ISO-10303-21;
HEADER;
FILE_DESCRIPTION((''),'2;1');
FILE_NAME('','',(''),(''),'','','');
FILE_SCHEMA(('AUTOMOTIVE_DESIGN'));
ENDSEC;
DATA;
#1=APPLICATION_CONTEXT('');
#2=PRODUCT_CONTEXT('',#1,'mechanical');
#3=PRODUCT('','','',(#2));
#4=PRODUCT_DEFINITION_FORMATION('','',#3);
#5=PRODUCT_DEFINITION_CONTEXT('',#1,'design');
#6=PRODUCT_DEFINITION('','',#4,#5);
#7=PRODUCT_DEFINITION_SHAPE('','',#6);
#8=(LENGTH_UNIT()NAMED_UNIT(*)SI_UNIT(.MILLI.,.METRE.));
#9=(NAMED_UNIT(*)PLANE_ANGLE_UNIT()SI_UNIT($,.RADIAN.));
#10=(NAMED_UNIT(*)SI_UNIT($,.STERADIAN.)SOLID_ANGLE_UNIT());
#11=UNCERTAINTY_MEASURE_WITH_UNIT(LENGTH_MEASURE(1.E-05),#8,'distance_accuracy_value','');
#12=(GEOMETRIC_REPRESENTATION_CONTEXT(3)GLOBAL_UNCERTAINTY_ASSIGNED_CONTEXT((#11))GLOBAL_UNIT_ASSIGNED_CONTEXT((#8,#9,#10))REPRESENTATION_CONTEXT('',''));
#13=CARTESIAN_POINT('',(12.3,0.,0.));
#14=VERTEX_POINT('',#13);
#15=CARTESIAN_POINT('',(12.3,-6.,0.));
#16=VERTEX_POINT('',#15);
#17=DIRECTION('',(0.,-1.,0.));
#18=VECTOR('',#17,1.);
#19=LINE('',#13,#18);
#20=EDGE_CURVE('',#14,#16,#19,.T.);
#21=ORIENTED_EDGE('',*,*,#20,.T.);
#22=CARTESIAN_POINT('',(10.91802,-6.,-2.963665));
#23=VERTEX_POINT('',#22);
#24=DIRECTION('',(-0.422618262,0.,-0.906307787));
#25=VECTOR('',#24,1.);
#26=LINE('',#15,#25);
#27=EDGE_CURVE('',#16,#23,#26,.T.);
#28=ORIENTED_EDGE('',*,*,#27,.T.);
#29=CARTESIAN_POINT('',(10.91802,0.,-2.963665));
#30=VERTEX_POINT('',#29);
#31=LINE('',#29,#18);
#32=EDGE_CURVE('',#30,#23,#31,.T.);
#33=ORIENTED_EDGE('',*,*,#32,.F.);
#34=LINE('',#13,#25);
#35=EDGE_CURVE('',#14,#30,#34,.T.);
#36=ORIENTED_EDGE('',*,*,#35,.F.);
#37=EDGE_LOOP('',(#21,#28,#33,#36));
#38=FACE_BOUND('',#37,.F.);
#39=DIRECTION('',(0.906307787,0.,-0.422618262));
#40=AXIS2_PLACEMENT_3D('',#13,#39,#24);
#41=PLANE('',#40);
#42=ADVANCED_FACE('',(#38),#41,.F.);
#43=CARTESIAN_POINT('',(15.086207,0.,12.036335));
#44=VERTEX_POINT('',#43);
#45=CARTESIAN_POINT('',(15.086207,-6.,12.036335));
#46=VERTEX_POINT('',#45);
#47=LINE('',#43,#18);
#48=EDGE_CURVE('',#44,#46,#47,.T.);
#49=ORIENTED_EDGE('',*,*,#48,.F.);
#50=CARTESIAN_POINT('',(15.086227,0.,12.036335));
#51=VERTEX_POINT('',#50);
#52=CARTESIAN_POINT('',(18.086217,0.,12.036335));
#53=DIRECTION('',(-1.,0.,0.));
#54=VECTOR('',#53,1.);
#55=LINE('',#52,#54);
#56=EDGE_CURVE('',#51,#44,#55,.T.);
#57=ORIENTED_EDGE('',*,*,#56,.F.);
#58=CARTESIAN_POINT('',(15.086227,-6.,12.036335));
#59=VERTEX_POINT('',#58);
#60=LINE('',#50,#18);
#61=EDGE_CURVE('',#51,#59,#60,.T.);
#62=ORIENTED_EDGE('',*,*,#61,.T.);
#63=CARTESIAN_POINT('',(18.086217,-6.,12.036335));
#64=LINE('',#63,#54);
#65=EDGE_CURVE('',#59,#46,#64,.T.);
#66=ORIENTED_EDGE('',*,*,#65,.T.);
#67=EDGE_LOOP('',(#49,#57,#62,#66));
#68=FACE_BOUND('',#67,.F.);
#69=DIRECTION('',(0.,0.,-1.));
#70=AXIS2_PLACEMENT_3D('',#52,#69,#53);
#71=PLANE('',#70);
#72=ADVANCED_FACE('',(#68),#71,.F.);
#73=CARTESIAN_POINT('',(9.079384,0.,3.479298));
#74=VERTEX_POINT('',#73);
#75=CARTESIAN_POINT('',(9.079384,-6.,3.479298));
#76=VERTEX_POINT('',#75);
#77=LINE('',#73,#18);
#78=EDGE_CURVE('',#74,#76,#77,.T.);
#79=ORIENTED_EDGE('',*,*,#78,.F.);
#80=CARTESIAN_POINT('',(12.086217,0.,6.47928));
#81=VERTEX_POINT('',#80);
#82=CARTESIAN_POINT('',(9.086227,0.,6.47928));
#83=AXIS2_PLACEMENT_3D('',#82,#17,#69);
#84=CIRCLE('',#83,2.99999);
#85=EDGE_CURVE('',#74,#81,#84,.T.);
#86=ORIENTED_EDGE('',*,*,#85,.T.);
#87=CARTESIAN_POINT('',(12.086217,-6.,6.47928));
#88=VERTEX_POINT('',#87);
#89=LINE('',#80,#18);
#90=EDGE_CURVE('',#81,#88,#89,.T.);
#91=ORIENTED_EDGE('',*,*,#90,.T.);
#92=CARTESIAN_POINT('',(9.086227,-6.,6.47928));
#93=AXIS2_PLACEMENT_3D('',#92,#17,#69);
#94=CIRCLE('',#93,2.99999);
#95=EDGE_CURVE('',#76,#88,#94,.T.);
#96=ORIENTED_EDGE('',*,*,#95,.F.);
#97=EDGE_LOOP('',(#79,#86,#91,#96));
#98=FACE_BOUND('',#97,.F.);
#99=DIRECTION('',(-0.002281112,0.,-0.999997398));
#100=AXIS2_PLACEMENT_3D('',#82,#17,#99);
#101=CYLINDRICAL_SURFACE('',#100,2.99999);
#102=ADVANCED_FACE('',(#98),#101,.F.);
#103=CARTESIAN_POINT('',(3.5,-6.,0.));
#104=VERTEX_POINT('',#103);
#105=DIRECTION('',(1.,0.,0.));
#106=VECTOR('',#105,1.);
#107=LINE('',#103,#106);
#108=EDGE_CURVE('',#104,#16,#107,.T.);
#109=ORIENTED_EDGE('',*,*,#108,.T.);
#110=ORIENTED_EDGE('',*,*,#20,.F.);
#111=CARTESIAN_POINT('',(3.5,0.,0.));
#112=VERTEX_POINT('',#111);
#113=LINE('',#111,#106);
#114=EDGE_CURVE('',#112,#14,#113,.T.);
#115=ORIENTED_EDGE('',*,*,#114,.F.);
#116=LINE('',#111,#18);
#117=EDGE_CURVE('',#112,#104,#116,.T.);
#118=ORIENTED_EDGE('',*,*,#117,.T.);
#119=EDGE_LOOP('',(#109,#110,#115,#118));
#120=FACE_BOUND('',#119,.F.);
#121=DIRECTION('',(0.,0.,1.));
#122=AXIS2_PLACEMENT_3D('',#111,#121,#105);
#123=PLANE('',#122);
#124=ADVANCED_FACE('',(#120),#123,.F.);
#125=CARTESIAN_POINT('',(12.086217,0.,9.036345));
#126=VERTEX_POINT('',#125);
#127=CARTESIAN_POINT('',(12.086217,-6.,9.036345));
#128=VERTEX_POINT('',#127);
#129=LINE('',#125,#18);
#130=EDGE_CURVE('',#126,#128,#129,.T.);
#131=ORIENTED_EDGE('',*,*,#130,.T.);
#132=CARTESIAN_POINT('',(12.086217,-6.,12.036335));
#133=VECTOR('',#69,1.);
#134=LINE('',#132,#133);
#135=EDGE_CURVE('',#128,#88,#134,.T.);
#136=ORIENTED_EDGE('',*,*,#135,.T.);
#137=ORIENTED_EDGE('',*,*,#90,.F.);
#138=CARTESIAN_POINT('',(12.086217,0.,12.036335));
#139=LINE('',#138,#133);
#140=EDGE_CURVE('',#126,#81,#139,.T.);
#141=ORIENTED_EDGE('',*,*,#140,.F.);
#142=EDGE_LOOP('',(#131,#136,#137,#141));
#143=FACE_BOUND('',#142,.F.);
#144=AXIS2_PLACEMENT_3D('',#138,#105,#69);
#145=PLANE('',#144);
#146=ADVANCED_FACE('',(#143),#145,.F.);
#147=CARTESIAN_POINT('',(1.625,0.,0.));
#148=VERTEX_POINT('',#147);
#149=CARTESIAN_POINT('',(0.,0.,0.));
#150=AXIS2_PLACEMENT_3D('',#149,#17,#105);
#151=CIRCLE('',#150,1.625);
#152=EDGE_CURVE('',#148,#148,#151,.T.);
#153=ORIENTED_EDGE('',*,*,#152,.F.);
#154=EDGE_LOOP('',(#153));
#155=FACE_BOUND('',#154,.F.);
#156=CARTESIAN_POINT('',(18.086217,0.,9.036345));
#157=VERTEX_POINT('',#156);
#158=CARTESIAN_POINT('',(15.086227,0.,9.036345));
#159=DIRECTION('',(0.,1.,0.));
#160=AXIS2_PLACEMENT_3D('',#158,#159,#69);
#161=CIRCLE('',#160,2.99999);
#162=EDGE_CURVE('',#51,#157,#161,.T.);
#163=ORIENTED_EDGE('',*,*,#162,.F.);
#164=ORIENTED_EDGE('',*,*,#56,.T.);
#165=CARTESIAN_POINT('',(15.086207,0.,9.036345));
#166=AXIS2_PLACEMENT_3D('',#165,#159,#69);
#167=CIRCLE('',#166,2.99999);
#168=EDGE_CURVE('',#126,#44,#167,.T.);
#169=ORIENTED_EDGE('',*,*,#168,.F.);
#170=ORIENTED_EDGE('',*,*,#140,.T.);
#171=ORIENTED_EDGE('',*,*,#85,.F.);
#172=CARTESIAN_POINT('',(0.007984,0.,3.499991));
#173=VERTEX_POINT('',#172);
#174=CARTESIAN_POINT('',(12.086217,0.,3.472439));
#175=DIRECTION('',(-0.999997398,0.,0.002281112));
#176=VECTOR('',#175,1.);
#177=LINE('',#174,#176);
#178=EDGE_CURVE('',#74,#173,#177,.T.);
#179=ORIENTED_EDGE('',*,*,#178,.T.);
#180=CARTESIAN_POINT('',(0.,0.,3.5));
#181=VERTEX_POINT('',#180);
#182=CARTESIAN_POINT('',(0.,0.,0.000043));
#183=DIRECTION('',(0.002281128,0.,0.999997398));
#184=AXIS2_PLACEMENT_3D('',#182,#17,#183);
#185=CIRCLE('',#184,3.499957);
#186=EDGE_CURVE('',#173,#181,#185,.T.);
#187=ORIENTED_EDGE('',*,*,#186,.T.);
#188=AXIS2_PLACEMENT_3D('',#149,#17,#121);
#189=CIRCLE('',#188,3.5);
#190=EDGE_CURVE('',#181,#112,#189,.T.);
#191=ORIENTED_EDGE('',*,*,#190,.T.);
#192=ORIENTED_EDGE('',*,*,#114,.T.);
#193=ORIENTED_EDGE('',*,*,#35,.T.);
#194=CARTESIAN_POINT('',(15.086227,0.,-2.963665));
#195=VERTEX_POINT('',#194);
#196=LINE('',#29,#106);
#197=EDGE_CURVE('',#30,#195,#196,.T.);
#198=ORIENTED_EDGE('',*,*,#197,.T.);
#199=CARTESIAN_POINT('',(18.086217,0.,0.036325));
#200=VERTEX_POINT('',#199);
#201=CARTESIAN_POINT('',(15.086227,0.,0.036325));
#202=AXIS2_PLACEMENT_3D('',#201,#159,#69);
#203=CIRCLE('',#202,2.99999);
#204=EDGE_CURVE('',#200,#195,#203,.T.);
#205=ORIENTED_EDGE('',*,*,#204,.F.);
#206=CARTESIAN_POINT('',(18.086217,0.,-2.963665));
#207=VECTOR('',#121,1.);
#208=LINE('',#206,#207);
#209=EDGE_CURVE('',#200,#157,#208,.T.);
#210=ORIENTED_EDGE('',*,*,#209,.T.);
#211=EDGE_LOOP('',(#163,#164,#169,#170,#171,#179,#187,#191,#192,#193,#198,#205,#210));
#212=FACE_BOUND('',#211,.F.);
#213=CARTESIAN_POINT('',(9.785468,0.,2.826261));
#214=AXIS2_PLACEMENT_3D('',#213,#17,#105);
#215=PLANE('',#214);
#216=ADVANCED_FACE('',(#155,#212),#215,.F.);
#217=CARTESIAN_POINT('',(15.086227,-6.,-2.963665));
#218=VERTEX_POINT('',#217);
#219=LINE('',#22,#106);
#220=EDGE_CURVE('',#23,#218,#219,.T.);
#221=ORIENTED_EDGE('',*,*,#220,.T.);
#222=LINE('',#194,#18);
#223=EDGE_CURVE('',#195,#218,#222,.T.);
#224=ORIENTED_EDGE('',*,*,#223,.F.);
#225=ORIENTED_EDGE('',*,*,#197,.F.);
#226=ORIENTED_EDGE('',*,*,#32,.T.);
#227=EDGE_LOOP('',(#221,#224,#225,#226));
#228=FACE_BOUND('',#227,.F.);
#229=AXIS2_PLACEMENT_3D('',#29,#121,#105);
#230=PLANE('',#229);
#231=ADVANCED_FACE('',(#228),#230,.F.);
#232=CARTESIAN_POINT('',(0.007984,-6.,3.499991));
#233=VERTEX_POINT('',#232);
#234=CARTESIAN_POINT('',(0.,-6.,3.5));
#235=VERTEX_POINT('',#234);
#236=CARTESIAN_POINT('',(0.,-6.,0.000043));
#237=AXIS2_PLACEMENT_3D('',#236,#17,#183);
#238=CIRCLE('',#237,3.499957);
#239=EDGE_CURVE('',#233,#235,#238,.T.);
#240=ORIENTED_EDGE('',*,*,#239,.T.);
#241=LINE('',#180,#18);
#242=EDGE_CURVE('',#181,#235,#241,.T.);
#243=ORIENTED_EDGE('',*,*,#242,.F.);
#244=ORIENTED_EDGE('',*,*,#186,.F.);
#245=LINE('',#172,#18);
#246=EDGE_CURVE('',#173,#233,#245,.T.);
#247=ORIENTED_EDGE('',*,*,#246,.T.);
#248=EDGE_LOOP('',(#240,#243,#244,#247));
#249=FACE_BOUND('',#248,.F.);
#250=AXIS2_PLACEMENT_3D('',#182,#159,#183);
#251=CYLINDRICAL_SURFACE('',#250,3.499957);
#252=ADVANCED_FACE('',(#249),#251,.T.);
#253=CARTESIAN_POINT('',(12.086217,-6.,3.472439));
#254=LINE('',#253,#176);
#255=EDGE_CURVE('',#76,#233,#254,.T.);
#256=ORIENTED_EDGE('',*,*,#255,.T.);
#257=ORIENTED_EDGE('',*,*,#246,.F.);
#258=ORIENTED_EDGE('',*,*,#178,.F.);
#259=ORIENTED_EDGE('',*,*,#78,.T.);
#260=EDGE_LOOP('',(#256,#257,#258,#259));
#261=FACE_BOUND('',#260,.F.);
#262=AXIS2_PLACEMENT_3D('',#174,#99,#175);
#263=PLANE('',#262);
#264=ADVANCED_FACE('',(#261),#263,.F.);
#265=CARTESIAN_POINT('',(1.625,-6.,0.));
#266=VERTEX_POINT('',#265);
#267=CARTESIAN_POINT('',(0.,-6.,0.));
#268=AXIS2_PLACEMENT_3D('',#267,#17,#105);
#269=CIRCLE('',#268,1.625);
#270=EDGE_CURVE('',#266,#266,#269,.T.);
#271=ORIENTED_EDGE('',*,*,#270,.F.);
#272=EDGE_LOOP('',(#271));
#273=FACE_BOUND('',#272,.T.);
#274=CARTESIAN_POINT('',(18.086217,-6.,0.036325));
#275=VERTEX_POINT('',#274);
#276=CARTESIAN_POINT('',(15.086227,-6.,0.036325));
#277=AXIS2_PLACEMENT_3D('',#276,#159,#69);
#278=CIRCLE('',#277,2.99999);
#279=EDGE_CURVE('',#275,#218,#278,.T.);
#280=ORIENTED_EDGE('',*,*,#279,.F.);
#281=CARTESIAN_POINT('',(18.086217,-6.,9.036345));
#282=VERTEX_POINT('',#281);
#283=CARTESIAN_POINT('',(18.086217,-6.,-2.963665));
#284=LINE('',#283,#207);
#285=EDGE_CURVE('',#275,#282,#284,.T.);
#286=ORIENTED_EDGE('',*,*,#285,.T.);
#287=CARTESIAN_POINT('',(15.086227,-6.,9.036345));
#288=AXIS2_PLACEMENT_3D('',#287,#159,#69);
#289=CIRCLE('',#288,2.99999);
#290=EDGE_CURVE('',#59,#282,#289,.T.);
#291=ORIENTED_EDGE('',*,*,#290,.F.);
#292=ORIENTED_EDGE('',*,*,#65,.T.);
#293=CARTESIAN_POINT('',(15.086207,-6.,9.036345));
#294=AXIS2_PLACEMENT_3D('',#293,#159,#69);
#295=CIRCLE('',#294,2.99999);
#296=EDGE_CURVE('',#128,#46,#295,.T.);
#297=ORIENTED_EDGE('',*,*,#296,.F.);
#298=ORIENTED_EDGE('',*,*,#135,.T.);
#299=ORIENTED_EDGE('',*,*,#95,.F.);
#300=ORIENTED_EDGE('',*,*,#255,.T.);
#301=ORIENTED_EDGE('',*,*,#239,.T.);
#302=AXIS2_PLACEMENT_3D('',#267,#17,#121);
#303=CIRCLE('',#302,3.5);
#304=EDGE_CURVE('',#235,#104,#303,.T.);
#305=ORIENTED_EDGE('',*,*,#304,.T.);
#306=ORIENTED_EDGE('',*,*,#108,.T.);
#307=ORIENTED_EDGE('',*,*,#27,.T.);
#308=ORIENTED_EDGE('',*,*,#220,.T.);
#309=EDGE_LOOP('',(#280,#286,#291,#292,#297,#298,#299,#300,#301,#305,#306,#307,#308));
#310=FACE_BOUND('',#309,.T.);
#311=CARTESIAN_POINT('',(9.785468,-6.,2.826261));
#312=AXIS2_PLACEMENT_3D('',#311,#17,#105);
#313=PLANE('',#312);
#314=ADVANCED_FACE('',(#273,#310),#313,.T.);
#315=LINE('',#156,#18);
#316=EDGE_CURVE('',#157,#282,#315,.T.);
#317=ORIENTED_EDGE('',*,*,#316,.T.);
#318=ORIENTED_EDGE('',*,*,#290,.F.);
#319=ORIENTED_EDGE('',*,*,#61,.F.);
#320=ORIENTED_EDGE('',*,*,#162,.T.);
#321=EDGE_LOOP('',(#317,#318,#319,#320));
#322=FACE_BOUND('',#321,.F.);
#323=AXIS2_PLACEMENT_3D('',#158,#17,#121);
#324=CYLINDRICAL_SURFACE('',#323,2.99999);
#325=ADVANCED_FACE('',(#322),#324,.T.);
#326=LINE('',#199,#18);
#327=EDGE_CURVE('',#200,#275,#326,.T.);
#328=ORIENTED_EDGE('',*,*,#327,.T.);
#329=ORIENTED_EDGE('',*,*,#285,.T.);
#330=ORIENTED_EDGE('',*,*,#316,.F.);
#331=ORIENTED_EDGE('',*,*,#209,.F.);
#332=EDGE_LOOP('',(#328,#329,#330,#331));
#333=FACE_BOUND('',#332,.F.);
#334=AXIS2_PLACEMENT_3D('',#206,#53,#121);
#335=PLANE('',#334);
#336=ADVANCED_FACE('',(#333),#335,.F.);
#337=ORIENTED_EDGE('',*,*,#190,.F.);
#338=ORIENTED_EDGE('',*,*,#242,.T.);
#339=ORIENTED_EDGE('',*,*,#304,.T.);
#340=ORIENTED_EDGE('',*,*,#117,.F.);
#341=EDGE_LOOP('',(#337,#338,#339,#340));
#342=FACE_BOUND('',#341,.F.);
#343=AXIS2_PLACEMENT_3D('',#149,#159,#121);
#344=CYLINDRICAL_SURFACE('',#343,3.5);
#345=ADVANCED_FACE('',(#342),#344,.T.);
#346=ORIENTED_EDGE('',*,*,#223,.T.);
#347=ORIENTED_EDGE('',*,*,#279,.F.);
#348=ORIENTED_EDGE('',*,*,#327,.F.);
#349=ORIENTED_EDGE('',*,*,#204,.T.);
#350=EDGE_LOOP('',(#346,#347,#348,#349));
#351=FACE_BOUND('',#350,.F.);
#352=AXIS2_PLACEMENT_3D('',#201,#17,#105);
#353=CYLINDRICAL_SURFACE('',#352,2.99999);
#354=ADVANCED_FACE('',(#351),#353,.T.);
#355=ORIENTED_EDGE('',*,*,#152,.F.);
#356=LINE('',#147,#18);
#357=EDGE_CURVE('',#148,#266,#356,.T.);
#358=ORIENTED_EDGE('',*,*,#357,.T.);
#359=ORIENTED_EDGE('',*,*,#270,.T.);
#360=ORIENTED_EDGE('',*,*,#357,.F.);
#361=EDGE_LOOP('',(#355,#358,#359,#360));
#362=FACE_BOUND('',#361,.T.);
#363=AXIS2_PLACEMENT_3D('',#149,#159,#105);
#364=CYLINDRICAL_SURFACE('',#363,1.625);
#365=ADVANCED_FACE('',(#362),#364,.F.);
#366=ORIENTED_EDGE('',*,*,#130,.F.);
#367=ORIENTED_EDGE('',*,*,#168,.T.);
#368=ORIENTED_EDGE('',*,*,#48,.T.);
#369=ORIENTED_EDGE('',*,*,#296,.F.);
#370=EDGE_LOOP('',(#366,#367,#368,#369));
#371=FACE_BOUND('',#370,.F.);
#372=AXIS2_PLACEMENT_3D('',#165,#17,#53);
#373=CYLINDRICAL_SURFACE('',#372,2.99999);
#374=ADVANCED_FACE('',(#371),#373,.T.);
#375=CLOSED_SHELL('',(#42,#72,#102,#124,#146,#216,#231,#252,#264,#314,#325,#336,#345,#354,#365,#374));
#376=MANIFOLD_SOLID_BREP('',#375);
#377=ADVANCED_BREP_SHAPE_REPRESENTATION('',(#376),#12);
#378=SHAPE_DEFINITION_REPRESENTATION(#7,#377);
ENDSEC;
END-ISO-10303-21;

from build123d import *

# Parameters (mm, degrees)
F0_R     = 1.625
F1_DEPTH = 6
F2_R     = 2.99999


# Not quite as in the source:
# - a fillet or chamfer is up to 0.001 mm smaller than in the source, because OpenCascade refuses the exact size


with BuildPart() as f1:
    # F0 (on Front) → F1 (new body)
    with BuildSketch(Plane.XZ):
        with BuildLine():
            Line((12.0862172917, 3.4724390134), (0.0079838936, 3.4999908939))
            ThreePointArc((0.0079838936, 3.4999908939), (0.0039919494, 3.4999977235), (0, 3.5))
            ThreePointArc((0, 3.5), (-2.4748737342, -2.4748737342), (3.5, 0))
            Line((3.5, 0), (12.3, 0))
            Line((12.3, 0), (10.9180201011, -2.9636654571))
            Line((10.9180201011, -2.9636654571), (18.0862172917, -2.9636654571))
            Line((18.0862172917, -2.9636654571), (18.0862172917, 12.0363345429))
            Line((18.0862172917, 12.0363345429), (12.0862172917, 12.0363345429))
            Line((12.0862172917, 12.0363345429), (12.0862172917, 3.4724390134))
        make_face()
        Circle(F0_R, mode=Mode.SUBTRACT)
    extrude(amount=F1_DEPTH)

    # F2 (radius 3 in the source; OpenCascade refuses exactly that, so slightly less here)
    f2_edges = [f1.edges().sort_by_distance(p)[0] for p in [
        (12.086217, -3, 12.036335),
        (12.086217, -3, 3.472439),
        (18.086217, -3, 12.036335),
        (18.086217, -3, -2.963665),
    ]]
    fillet(f2_edges, radius=F2_R)


solid = f1.part
